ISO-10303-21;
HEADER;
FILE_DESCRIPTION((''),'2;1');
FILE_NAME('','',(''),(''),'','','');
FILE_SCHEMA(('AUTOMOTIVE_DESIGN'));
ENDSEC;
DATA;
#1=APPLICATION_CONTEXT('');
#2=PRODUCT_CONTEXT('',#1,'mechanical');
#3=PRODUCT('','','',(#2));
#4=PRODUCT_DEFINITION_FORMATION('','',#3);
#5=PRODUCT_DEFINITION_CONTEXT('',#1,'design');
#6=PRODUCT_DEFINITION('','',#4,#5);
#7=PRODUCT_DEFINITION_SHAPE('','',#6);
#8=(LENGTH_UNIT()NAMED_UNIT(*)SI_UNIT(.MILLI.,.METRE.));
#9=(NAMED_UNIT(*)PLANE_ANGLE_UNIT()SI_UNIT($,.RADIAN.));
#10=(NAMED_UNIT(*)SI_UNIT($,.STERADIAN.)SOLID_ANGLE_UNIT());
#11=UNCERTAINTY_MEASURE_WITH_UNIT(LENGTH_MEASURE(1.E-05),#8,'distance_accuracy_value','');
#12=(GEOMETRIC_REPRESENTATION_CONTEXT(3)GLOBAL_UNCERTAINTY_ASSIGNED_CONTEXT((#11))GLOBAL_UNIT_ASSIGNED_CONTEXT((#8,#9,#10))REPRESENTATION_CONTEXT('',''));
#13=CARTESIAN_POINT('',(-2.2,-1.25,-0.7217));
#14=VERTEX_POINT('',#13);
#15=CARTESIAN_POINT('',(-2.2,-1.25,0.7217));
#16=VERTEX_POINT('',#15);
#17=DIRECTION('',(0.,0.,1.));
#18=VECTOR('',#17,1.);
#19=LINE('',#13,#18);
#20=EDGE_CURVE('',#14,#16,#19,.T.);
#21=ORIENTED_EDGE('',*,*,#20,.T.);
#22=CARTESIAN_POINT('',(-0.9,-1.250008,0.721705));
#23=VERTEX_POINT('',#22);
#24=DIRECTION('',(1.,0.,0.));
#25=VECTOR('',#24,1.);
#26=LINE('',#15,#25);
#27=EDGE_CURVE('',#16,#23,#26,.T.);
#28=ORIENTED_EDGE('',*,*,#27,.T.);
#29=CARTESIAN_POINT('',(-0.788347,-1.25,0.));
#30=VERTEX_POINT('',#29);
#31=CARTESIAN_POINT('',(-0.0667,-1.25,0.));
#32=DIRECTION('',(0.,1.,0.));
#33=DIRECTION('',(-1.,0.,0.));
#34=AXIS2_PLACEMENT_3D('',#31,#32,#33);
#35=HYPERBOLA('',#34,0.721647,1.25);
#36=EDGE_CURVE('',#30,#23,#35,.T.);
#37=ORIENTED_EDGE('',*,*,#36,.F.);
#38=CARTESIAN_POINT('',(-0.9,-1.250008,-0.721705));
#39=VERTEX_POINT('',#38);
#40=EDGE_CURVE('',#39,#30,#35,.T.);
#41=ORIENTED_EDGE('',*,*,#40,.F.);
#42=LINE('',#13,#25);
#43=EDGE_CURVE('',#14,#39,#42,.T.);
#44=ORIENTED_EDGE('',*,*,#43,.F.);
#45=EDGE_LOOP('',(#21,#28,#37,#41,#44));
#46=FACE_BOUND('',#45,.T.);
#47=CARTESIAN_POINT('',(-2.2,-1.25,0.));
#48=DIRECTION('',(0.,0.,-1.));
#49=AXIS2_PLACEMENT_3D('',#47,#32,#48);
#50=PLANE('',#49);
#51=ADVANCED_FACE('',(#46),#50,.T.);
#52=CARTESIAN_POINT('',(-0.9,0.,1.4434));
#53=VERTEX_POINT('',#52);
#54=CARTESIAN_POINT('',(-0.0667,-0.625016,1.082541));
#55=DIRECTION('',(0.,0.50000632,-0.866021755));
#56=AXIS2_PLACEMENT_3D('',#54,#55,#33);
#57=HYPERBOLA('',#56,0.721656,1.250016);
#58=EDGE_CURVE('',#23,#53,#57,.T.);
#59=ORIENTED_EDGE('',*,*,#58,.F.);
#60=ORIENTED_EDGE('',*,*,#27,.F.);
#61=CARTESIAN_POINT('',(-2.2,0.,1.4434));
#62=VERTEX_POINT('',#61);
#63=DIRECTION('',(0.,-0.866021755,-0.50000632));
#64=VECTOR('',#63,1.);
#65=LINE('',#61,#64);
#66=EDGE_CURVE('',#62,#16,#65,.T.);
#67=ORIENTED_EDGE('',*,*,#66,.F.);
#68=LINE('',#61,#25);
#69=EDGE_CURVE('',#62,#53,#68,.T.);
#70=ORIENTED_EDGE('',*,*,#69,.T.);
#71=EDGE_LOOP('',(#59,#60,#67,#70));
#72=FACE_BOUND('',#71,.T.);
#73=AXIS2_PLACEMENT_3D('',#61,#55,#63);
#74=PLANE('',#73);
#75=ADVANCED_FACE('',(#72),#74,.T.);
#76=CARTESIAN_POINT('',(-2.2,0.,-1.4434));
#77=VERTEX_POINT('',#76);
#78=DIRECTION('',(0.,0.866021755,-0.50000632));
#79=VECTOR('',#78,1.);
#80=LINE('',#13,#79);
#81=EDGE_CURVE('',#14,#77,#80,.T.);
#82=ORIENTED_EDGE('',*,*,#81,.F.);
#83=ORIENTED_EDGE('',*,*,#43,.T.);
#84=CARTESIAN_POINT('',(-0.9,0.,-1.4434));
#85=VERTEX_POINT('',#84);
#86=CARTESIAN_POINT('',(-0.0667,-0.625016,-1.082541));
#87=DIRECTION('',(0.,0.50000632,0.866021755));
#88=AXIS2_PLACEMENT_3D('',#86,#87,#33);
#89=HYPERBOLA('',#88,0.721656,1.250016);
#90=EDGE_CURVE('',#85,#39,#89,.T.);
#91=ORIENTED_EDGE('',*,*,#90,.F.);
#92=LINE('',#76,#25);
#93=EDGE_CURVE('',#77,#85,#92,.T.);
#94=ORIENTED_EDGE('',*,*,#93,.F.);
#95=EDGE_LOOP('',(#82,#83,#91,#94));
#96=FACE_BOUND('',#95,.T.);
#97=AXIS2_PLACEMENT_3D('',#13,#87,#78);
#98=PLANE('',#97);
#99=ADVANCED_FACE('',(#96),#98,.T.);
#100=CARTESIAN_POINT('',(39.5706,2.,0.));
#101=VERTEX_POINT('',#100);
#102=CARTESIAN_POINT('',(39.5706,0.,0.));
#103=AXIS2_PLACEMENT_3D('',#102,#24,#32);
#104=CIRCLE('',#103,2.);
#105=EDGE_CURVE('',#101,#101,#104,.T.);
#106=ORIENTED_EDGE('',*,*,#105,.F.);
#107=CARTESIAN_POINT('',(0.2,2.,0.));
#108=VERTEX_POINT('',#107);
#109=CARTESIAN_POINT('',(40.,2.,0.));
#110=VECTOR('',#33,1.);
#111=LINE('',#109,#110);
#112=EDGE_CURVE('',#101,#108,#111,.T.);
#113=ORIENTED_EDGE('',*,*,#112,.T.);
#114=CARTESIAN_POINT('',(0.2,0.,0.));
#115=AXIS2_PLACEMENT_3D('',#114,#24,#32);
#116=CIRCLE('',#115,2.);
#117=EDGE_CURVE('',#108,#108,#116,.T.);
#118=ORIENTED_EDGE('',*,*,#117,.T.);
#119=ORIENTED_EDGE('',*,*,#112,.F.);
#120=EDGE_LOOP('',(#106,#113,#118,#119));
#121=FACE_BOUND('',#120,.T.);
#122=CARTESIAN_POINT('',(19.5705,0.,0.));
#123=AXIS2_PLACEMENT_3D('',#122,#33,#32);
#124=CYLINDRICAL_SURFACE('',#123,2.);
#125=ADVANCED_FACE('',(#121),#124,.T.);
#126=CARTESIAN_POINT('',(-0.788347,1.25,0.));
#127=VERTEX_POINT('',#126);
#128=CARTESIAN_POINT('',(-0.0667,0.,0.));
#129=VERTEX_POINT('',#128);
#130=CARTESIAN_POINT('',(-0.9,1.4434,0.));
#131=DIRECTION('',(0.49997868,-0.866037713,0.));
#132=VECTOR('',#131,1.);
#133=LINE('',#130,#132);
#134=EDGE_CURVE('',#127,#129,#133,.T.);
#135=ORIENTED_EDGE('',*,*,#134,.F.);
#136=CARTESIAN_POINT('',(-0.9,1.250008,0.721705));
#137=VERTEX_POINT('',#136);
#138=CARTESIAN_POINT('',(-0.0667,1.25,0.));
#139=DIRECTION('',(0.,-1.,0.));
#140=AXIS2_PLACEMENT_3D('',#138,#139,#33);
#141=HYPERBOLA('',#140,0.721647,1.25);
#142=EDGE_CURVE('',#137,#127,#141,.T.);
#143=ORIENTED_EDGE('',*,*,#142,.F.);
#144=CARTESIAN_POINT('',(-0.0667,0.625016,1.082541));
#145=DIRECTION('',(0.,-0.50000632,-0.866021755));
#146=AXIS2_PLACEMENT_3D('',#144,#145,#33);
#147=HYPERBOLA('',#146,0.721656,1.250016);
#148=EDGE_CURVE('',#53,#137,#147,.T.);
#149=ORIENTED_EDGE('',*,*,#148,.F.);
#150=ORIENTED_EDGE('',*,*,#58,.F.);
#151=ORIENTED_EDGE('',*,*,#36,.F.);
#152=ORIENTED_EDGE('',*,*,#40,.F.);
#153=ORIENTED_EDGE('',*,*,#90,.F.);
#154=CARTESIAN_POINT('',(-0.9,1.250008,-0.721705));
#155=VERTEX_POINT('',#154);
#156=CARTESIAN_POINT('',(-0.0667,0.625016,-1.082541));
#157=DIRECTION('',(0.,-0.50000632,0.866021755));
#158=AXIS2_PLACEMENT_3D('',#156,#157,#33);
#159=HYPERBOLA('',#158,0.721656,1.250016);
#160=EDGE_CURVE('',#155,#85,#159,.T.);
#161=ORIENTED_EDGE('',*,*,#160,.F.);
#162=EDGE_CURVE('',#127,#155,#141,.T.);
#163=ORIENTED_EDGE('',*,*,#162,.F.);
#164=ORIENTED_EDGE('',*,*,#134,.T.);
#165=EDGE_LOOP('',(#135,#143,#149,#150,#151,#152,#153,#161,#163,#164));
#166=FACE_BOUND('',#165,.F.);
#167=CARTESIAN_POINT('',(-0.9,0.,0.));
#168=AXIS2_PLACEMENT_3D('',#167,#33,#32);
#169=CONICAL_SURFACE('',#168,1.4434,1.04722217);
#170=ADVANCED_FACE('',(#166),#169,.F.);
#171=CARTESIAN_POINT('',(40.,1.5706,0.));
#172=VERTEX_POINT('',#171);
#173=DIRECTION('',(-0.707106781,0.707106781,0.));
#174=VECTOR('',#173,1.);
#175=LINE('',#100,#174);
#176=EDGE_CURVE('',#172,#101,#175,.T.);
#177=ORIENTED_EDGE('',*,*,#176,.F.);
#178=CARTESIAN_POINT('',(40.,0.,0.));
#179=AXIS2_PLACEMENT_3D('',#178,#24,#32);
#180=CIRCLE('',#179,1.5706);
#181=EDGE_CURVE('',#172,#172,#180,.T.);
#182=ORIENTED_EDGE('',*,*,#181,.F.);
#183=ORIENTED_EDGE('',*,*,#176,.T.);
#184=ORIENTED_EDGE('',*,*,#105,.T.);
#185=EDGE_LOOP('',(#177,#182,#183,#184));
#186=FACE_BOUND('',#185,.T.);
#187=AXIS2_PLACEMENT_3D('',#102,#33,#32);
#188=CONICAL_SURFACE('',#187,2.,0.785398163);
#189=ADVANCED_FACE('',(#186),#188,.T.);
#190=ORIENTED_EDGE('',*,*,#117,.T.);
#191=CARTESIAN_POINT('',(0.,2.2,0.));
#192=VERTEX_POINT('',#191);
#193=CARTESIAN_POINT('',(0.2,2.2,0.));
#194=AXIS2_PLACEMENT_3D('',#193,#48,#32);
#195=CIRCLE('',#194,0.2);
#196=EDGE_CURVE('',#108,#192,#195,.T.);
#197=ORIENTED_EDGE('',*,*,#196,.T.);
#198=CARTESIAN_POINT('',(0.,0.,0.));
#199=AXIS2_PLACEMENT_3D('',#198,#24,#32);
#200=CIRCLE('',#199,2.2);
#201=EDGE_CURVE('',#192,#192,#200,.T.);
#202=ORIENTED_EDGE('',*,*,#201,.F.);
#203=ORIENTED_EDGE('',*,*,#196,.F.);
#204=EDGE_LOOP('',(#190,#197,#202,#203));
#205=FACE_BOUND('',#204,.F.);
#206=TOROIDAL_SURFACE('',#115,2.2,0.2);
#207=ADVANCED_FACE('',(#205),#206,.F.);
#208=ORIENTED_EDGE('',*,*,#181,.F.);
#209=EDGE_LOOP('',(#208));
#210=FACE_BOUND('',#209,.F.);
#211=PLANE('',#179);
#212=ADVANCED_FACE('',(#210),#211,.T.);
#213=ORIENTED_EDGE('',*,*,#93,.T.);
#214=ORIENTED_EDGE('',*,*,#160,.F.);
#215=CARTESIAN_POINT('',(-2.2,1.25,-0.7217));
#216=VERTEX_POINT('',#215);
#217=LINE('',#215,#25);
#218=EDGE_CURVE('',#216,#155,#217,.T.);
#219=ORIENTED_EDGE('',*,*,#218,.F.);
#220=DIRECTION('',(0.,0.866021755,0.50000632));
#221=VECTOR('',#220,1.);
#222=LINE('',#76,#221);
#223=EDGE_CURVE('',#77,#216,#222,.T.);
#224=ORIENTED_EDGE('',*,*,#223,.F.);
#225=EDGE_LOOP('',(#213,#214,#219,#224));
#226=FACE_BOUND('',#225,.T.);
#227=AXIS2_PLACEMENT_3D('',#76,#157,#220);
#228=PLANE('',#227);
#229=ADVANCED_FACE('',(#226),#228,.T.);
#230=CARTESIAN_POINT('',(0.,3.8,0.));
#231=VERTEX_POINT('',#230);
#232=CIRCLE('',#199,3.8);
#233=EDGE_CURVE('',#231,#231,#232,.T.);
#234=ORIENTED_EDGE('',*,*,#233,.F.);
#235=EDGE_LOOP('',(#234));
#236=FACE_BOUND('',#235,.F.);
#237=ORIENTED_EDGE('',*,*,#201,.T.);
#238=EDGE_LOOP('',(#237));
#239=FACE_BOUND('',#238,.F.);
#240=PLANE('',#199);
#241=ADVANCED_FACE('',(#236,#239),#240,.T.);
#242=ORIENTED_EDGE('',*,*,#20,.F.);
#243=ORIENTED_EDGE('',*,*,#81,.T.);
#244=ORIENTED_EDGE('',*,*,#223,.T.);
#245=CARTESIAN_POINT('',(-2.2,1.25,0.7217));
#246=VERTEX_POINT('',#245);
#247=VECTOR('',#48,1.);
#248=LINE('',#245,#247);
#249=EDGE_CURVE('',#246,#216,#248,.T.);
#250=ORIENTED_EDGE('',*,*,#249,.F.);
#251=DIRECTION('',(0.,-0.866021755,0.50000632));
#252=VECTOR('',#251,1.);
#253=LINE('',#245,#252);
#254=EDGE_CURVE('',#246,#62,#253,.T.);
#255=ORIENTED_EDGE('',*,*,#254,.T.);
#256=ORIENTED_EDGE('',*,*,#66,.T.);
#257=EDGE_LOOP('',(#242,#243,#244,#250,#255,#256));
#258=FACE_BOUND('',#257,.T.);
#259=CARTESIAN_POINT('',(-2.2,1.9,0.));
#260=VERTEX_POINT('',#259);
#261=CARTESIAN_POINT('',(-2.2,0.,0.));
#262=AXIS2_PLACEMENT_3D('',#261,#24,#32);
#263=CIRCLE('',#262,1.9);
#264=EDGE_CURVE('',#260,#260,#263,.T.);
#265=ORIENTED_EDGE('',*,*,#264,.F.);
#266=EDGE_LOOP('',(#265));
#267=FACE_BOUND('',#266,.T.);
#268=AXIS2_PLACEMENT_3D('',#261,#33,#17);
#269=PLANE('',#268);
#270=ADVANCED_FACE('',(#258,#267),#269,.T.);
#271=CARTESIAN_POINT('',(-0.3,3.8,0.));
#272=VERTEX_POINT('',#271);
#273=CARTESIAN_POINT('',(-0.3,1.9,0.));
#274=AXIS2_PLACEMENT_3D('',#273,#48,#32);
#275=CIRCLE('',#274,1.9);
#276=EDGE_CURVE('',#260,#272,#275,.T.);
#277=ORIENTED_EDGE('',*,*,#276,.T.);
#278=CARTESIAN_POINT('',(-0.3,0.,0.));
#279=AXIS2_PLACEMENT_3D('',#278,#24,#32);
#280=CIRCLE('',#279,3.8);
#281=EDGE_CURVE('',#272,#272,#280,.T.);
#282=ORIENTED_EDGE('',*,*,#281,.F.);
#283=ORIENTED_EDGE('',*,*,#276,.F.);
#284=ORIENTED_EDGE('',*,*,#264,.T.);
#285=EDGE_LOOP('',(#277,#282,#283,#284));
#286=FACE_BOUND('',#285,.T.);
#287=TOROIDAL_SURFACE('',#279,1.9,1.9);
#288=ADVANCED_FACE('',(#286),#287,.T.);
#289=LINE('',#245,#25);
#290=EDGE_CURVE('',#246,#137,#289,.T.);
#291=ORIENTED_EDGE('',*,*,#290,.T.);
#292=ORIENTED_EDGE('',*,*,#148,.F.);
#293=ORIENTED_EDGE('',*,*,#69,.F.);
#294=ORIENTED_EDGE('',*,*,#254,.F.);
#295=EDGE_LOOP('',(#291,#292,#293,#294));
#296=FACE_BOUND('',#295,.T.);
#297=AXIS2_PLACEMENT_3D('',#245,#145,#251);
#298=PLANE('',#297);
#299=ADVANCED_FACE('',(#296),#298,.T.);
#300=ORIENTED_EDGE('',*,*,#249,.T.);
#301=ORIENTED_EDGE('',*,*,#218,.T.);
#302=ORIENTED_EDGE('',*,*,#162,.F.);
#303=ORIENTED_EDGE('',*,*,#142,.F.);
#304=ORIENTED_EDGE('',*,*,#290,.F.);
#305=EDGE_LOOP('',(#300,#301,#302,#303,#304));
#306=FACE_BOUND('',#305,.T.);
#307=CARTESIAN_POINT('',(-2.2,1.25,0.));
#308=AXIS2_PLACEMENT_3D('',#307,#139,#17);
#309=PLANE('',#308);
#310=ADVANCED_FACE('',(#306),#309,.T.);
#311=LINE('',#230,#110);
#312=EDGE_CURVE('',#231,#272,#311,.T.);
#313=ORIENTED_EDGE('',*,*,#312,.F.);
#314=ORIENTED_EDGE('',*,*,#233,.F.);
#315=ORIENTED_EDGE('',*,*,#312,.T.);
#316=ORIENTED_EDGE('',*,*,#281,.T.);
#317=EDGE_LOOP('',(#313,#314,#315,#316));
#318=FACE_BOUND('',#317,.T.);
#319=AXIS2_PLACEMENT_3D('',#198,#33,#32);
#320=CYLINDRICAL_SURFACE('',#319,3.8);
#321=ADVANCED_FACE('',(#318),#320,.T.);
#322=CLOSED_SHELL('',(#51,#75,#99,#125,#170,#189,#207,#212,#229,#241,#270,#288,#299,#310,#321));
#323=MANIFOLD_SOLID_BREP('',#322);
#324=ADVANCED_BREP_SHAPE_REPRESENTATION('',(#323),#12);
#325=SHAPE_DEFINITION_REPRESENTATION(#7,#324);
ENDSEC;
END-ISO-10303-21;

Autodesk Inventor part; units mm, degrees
ref_plane "YZ Plane" through (0, 0, 0) normal (1, 0, 0) x (0, 1, 0)
ref_plane "XZ Plane" through (0, 0, 0) normal (0, 1, 0) x (-1, 0, 0)
sketch "Sketch1" plane through (0, 0, 0) normal (0, 0, 1) x (1, 0, 0)
  line L0 (-0.0667, 0) -> (40, 0)
  line L1 (40, 0) -> (40, 2)
  line L2 (40, 2) -> (20, 2)
  line L3 (20, 2) -> (19.5705, 2)
  line L4 (19.5705, 2) -> (0, 2)
  line L5 (0, 2) -> (0, 3.8)
  line L6 (0, 3.8) -> (-2.2, 3.8)
  line L7 (-2.2, 3.8) -> (-2.2, 1.4434)
  line L8 (-2.2, 1.4434) -> (-0.9, 1.4434)
  line L9 (-0.9, 1.4434) -> (-0.0667, 0)
  line L10 (-10.64, 0) -> (48.44, 0) projected
  line L11 (0, -0.76) -> (0, 4.56) projected
  line L12 (20, 2) -> (0, 2) construction
  dimension "d1" = 20
  dimension "d2" = 0.4295
  dimension "d3" = 2.2
  dimension "d4" = 1.3
  dimension "d5" = 60
  dimension "d6" = 4
  dimension "d7" = 4
  dimension "d8" = 2.8868
  dimension "d9" = 7.6
  dimension "d26" = 40
revolve "Body" add sketch "Sketch1" angle 360 about axis through (-0.0667, 0, 0) along (1, 0, 0)
sketch "Sketch2" plane through (-2.2, 0, 0) normal (-1, 0, 0) x (0, 0, 1)
  circle A0 centre (0, 0) radius 1.4434 projected
  line L0 (0, -5.32) -> (0, 5.32) projected
  line L1 (-5.32, 0) -> (5.32, 0) projected
  line L2 (1.4434, 0) -> (0.7217, -1.25)
  line L3 (0.7217, -1.25) -> (-0.7217, -1.25)
  line L4 (-0.7217, -1.25) -> (-1.4434, 0)
  line L5 (-1.4434, 0) -> (-0.7217, 1.25)
  line L6 (-0.7217, 1.25) -> (0.7217, 1.25)
  line L7 (0.7217, 1.25) -> (1.4434, 0)
extrude "Slot" add sketch "Sketch2" against normal up to next contours L7 A0 | A0 L2 | L6 L0 A0 | A0 L0 L3 | L0 L6 A0 | A0 L3 L0 | L4 A0 | A0 L5
fillet "Fillet1" radius 1.9 1 edges at (-2.2, -3.8, 0)
thread "Thread" size "M4x0.7" class "6g" standard "ISO Metric profile" length 20
chamfer "Chamfer1" distance 0.4294 distance2 0.4294 1 edges at (40, -2, 0) measured on face at (40, -0.1312, -0.9006)
ref_plane "Work Plane1" through (29, 0, 0) normal (0, -1, 0) x (1, 0, 0)
fillet "Fillet2" radius 0.2 1 edges at (0, -2, 0)
equation "\"d30\" = R"
equation "\"d17\" = RR"
equation "\"d13\" = GEL"
equation "\"d15\" = -0.5 * SPD + 0.5 * GD"
equation "\"d16\" = GUL"
equation "\"d1\" = GEL"
equation "\"d3\" = KOH"
equation "\"d4\" = INTI"
equation "\"d6\" = GD"
equation "\"d7\" = BDM"
equation "\"d8\" = 1.1547 * SW"
equation "\"d9\" = KOD"
equation "\"d26\" = NLG"
equation "\"GD\" = NND"
equation "\"NLG\" = 40"
equation "\"GEL\" = 20"
equation "\"KOD\" = 7.6"
equation "\"KOH\" = 2.2"
equation "\"INTI\" = 1.3"
equation "\"GAL\" = 0.61345 * PTC"
equation "\"GUL\" = 0.61345 * PTC"
equation "\"BDM\" = NND"
equation "\"SW\" = 2.5"
equation "\"RR\" = 1.9"
equation "\"SPD\" = NND - 1.2269 * PTC"
equation "\"R\" = 0.2"
equation "\"TOA\" = 30deg"
equation "\"GD1\" = THREADDIA - 1.2269 * PTC"
equation "\"THREADDIA\" = 4"
equation "\"PTC\" = 0.7"
equation "\"NND\" = 4"
equation "\"KOH1\" = 0.3"
equation "\"E0\" = 2.873"
properties part number "ISO 7380-1 - M4 x 40" material "Steel"
